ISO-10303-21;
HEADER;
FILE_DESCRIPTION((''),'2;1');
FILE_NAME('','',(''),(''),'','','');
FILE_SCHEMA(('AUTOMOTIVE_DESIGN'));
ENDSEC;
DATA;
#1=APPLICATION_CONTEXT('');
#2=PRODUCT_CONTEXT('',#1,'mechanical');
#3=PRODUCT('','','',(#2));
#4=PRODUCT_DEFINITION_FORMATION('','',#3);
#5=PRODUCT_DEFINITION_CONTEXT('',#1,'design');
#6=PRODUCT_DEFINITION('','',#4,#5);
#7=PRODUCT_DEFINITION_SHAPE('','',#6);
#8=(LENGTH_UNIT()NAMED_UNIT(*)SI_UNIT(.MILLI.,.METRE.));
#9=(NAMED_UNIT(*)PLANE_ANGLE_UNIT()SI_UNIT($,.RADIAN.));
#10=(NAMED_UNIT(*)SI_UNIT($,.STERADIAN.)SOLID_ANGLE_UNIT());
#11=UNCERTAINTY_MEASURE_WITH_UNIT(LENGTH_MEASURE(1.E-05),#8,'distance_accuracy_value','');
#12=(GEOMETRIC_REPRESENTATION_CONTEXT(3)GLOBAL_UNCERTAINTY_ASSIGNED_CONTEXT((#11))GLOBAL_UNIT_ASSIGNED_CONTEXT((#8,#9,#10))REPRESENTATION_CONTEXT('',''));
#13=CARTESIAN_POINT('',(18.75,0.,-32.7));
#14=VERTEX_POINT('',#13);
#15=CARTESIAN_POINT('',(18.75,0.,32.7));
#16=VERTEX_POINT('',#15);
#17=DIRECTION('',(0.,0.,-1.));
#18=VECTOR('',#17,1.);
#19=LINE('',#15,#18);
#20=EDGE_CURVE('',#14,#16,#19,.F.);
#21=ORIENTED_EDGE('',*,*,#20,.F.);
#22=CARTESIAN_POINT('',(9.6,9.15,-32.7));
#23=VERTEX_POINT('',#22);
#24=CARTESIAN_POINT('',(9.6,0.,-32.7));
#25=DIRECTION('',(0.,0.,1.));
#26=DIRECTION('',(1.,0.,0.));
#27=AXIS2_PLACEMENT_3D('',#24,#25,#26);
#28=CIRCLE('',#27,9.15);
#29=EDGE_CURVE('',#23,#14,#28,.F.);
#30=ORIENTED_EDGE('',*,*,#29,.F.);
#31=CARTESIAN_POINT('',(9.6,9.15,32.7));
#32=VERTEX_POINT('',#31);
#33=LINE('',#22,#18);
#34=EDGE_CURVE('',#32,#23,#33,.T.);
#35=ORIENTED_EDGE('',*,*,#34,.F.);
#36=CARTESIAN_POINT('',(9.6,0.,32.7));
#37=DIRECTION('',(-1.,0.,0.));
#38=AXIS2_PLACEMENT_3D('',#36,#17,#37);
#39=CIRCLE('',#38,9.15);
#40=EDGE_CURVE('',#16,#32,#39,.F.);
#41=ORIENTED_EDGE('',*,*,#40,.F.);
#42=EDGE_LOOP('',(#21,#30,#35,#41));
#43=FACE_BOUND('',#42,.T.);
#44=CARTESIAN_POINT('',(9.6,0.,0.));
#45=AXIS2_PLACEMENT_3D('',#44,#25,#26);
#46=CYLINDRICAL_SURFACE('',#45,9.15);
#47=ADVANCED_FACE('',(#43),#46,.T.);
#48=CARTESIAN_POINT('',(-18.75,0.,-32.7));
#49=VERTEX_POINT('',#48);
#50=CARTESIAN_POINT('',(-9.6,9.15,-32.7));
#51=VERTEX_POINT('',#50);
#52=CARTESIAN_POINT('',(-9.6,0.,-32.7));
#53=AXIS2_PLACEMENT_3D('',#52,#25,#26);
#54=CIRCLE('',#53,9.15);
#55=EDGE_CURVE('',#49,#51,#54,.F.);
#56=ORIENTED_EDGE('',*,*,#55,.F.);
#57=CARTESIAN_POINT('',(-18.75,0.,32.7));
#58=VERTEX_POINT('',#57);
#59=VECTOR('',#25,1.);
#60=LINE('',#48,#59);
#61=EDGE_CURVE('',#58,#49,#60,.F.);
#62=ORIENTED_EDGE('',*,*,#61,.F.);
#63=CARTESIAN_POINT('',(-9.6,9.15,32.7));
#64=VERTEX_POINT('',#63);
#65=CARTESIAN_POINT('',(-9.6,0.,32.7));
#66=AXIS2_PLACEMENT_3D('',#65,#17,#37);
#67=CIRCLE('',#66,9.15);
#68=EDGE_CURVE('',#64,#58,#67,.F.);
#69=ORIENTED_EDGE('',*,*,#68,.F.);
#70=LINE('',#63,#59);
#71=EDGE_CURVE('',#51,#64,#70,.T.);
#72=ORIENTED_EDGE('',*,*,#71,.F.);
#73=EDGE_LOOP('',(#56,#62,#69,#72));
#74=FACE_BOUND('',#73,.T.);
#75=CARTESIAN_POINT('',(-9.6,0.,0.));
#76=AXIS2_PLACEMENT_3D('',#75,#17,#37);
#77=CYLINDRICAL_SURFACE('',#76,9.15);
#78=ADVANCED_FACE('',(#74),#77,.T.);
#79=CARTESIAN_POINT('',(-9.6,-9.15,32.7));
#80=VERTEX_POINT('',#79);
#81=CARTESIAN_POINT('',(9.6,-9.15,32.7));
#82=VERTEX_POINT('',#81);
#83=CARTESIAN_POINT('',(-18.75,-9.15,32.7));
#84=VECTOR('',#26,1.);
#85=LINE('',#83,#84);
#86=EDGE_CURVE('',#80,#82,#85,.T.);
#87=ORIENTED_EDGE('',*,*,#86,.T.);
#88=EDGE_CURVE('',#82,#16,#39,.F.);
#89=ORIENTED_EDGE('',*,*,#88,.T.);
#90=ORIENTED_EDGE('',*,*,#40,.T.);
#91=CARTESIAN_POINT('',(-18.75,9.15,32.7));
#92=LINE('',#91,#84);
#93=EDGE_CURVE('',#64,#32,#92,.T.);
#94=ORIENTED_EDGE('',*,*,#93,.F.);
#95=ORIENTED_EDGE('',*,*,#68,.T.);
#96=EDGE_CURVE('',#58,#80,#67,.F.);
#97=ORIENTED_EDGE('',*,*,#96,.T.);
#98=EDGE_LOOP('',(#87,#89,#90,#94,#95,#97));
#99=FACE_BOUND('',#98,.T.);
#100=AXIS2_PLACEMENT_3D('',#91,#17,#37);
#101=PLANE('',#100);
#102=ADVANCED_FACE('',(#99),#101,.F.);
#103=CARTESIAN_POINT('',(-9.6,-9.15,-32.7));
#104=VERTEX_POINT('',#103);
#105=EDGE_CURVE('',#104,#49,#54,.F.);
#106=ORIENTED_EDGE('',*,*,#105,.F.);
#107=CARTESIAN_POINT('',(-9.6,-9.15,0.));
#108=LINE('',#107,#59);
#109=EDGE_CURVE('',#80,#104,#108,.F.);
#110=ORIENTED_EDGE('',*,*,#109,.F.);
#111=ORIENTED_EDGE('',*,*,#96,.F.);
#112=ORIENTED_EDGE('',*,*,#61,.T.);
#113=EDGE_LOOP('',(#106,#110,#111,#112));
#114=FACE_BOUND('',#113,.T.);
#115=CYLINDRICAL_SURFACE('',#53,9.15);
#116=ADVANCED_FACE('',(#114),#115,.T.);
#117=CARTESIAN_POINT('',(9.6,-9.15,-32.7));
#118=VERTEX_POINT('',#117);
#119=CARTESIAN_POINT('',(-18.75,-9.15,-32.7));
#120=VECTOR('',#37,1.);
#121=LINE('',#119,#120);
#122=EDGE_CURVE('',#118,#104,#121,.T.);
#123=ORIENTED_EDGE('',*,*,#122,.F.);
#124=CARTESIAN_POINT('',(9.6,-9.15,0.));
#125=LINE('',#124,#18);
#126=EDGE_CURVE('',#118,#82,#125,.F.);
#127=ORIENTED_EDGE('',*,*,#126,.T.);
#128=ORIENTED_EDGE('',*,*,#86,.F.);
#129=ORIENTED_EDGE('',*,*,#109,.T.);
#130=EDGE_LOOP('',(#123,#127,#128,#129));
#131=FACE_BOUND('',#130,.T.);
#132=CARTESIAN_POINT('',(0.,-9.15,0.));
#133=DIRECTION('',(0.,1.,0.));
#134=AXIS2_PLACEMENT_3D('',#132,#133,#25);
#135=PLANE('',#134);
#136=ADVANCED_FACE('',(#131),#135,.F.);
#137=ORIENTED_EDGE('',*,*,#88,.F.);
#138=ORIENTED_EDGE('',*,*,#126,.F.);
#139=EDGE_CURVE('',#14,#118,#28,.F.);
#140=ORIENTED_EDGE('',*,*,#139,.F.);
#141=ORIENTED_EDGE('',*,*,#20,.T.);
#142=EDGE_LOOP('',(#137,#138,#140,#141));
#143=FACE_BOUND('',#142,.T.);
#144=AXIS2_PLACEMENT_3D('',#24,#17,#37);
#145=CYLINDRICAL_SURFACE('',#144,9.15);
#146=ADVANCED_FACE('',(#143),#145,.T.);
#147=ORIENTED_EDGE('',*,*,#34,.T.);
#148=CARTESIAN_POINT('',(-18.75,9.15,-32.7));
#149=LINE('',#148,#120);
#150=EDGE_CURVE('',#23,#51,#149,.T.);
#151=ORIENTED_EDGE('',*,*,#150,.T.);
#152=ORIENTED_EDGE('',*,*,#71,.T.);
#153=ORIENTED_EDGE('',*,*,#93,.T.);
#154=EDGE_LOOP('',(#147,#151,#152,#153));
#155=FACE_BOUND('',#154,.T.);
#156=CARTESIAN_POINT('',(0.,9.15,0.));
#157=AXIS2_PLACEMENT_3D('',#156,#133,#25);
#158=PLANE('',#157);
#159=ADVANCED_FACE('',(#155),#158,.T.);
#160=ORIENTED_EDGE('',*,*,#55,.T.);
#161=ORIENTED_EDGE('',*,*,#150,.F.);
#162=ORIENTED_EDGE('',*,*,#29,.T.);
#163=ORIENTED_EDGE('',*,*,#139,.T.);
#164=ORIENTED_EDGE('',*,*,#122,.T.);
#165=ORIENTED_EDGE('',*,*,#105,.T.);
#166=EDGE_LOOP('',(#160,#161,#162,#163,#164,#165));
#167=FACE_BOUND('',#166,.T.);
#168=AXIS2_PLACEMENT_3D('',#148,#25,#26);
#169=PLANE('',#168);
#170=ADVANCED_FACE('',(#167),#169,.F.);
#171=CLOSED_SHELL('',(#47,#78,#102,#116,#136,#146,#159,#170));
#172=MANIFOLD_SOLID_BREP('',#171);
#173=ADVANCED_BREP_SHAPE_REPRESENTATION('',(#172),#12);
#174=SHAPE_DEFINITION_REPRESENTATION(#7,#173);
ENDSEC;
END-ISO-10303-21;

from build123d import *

# Parameters (mm, degrees)
SKETCH1_W           = 37.5
SKETCH1_H           = 65.4
BOSS_EXTRUDE1_DEPTH = 9.15
FILLET1_R           = 9.15


with BuildPart() as part:
    # Sketch1 → Boss-Extrude1 (new, symmetric)
    with BuildSketch(Plane(origin=(0, 0, 0), x_dir=(1, 0, 0), z_dir=(0, 1, 0))):
        Rectangle(SKETCH1_W, SKETCH1_H)
    extrude(amount=BOSS_EXTRUDE1_DEPTH, both=True)

    # Fillet1
    fillet1_edges = [part.edges().sort_by_distance(p)[0] for p in [
        (18.75, -9.15, 0),
        (18.75, 9.15, 0),
        (-18.75, -9.15, 0),
        (-18.75, 9.15, 0),
    ]]
    fillet(fillet1_edges, radius=FILLET1_R - 0.0001)  # a hair under: the kernel refuses the full size


solid = part.part
